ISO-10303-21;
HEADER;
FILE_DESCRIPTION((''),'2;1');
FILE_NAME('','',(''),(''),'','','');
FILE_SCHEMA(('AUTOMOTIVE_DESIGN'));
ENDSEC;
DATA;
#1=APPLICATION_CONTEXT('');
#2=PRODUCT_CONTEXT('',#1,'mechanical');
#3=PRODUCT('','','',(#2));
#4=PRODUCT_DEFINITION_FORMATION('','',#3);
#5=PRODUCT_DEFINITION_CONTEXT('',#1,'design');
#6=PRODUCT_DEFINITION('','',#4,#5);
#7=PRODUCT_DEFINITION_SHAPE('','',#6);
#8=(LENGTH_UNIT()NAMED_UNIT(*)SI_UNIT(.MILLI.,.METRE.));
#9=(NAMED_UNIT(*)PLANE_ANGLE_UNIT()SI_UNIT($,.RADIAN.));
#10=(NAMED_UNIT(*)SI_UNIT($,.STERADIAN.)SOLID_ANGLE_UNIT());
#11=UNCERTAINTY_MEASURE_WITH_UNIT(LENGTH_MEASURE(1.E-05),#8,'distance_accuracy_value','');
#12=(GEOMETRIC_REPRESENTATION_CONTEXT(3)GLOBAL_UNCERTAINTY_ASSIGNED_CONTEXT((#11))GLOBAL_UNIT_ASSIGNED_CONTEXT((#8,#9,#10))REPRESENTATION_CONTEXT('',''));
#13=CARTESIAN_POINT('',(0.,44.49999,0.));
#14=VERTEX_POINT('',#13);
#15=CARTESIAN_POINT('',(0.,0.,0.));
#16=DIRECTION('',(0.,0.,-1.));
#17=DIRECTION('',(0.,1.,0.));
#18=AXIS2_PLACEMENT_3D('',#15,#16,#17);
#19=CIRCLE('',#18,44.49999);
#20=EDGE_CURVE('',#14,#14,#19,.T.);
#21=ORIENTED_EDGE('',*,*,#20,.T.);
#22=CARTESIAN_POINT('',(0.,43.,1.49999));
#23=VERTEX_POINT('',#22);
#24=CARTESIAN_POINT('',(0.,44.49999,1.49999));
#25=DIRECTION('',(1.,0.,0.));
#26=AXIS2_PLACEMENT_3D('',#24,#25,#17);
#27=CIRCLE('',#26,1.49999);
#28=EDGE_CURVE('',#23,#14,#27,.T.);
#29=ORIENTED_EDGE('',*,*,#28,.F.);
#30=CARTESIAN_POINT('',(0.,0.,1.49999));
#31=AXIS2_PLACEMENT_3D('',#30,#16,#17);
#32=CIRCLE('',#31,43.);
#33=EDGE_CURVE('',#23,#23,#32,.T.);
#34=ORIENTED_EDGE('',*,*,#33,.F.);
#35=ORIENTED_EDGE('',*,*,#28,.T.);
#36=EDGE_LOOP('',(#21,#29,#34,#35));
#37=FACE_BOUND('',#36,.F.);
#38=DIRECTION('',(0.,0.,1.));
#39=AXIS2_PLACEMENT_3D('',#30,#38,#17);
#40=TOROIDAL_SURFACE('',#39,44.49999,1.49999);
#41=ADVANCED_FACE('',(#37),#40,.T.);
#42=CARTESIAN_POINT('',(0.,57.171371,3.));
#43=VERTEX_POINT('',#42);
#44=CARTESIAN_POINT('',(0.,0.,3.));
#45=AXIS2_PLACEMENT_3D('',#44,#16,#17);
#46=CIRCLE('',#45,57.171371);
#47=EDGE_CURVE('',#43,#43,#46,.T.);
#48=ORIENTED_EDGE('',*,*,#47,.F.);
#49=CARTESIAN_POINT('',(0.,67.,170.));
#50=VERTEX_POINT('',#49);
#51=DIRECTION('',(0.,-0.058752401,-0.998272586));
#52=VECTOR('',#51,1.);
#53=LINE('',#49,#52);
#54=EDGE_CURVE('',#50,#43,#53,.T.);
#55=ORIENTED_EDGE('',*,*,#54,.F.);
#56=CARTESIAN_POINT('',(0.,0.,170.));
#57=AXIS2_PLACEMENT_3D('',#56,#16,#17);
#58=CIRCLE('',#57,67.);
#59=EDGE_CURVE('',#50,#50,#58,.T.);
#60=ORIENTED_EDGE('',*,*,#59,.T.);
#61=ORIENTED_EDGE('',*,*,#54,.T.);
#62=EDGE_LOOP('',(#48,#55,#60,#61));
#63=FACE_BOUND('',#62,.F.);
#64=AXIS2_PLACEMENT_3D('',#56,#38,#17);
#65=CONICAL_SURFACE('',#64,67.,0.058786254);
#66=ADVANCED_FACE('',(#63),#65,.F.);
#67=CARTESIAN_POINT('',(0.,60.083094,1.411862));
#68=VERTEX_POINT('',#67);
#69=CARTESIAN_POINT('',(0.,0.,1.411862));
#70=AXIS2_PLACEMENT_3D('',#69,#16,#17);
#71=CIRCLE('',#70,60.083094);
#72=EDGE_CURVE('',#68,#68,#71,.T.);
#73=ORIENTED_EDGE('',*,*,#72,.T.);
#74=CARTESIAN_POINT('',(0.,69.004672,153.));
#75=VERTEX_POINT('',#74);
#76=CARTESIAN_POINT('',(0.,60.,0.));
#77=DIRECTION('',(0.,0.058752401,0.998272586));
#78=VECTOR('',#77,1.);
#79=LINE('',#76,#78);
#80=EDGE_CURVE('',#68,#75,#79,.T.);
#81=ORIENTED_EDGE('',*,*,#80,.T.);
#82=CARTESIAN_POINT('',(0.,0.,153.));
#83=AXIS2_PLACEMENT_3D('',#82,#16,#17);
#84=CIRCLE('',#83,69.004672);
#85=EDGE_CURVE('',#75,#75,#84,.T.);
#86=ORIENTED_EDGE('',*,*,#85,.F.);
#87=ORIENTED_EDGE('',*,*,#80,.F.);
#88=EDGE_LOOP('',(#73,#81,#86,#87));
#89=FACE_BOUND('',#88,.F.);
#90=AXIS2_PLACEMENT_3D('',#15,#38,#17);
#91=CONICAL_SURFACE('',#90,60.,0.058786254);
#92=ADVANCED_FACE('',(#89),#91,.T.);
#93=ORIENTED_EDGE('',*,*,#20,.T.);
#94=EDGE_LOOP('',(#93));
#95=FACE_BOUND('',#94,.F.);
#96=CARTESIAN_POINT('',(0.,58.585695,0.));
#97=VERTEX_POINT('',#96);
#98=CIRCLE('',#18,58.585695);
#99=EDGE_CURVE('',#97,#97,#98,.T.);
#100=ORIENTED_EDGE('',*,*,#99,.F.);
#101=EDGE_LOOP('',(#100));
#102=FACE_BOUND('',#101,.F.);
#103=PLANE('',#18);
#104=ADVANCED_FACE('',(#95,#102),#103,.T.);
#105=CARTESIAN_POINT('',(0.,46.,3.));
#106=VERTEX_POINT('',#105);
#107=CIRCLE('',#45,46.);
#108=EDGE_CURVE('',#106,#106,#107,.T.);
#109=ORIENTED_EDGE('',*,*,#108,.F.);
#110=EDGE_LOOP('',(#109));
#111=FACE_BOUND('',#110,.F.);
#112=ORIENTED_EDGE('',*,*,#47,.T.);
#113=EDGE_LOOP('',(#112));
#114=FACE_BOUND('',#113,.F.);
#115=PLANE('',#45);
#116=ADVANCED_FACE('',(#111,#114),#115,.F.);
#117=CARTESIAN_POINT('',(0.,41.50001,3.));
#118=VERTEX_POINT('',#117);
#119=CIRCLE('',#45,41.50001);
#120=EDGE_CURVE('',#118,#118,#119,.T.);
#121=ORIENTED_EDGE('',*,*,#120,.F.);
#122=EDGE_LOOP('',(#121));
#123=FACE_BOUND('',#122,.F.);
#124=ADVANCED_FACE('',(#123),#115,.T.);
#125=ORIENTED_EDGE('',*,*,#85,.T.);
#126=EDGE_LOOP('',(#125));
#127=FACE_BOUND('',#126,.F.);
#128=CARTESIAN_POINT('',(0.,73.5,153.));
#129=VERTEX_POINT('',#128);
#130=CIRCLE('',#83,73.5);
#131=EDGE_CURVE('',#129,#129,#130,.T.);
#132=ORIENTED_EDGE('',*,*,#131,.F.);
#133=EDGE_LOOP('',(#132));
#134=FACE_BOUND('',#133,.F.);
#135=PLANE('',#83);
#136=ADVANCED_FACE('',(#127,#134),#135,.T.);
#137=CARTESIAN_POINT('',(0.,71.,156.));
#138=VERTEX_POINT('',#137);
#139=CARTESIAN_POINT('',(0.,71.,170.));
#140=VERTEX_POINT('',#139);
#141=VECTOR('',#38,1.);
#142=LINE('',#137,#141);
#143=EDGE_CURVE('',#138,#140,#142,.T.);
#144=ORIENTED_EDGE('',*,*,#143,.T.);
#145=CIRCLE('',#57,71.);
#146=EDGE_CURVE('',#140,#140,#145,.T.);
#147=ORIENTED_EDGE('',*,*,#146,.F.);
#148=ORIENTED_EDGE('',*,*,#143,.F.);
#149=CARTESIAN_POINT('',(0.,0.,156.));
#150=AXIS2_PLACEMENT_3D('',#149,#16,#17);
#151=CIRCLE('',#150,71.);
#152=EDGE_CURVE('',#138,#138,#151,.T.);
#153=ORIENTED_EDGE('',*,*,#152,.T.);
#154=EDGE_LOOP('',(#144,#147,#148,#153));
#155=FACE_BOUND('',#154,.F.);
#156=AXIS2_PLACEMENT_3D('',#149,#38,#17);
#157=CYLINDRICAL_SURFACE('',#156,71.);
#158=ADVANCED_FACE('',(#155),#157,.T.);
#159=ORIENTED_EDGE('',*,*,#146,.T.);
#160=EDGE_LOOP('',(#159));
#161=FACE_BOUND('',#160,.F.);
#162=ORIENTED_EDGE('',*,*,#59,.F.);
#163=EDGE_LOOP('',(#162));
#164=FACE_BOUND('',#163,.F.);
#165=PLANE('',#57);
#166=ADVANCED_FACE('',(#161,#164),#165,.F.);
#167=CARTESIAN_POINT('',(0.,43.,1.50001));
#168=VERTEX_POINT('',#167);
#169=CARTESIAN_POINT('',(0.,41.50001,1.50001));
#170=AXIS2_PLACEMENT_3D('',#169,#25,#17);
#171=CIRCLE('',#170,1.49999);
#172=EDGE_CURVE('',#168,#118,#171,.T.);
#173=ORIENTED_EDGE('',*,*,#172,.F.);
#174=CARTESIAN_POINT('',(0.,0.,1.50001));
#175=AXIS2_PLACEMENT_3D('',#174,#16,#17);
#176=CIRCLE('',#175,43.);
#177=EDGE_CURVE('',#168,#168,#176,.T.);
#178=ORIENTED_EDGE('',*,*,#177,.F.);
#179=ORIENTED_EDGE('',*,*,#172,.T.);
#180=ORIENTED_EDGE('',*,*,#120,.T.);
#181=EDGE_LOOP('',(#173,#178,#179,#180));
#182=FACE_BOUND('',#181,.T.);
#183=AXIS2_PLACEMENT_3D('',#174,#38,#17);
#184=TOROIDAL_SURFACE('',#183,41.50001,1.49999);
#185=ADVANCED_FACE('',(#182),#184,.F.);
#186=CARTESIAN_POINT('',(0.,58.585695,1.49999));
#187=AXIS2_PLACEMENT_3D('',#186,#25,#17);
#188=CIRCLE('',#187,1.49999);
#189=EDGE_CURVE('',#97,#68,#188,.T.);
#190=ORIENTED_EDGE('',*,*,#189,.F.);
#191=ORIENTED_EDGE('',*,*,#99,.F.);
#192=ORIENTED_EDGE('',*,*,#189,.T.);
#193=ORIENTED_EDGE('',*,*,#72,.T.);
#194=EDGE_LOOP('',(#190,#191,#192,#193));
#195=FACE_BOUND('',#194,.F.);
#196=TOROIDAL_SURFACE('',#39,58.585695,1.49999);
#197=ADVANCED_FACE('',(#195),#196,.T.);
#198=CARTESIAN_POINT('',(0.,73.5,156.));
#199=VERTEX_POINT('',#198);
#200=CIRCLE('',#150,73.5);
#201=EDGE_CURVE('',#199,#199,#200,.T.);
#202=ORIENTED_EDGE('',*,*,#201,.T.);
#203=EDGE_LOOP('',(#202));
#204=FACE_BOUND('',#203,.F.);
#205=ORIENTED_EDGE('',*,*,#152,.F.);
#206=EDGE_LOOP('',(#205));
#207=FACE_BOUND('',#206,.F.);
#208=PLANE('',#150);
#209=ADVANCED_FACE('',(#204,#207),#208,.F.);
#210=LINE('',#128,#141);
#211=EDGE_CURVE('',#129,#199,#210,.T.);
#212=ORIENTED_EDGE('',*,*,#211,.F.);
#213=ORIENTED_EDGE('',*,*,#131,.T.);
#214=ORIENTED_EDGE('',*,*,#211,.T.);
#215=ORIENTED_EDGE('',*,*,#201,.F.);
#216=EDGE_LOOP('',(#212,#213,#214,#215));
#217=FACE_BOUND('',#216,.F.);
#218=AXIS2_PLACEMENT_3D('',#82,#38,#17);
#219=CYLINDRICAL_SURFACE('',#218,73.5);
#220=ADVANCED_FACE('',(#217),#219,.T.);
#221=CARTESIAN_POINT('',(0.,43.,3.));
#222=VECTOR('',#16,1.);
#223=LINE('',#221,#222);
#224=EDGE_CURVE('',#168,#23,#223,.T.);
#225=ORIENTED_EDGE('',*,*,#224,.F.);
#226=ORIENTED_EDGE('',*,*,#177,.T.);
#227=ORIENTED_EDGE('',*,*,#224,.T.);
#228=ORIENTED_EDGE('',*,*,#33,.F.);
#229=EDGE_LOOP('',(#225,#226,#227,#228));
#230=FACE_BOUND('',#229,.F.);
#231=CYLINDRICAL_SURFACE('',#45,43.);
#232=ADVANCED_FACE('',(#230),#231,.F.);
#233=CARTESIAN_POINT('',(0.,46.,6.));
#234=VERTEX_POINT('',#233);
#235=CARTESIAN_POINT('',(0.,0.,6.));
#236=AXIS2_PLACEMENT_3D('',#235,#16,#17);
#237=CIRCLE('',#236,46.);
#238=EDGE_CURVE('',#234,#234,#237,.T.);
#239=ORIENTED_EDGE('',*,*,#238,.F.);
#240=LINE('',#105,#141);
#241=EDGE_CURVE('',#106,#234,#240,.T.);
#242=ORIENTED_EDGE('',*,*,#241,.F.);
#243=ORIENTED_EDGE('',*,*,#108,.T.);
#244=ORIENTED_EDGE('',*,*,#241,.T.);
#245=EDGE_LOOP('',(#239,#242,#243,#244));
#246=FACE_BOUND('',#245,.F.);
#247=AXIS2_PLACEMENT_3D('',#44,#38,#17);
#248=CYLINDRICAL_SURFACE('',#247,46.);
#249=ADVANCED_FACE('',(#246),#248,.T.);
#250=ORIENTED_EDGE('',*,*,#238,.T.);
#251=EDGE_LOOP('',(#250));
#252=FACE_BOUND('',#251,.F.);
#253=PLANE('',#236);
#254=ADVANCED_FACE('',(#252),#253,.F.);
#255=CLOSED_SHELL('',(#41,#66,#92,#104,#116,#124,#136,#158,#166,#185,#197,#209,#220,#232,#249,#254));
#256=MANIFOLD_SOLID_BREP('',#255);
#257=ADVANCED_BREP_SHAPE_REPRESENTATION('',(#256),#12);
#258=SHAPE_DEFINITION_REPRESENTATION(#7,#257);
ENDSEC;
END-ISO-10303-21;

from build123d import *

# Parameters (mm, degrees)
F2_R = 1.49999


# Not quite as in the source:
# - a fillet or chamfer is up to 0.001 mm smaller than in the source, because OpenCascade refuses the exact size


with BuildPart() as f1:
    # F0 (on Right) → F1 (revolve)
    with BuildSketch(Plane.YZ):
        Polygon((43, 3), (43, 0), (60, 0), (69.0046720892, 153), (73.5, 153), (73.5, 156), (71, 156), (71, 170), (67, 170), (57.1713709877, 3), (46, 3), (46, 6), (0, 6), (0, 3), align=None)
    revolve(axis=Axis((0, 0, 4.5), (0, 0, -1)))

    # F2 (radius 1.5 in the source; OpenCascade refuses exactly that, so slightly less here)
    f2_edges = [f1.edges().sort_by_distance(p)[0] for p in [
        (0, -43, 0),
        (0, -60, 0),
        (0, -43, 3),
    ]]
    fillet(f2_edges, radius=F2_R)


solid = f1.part
